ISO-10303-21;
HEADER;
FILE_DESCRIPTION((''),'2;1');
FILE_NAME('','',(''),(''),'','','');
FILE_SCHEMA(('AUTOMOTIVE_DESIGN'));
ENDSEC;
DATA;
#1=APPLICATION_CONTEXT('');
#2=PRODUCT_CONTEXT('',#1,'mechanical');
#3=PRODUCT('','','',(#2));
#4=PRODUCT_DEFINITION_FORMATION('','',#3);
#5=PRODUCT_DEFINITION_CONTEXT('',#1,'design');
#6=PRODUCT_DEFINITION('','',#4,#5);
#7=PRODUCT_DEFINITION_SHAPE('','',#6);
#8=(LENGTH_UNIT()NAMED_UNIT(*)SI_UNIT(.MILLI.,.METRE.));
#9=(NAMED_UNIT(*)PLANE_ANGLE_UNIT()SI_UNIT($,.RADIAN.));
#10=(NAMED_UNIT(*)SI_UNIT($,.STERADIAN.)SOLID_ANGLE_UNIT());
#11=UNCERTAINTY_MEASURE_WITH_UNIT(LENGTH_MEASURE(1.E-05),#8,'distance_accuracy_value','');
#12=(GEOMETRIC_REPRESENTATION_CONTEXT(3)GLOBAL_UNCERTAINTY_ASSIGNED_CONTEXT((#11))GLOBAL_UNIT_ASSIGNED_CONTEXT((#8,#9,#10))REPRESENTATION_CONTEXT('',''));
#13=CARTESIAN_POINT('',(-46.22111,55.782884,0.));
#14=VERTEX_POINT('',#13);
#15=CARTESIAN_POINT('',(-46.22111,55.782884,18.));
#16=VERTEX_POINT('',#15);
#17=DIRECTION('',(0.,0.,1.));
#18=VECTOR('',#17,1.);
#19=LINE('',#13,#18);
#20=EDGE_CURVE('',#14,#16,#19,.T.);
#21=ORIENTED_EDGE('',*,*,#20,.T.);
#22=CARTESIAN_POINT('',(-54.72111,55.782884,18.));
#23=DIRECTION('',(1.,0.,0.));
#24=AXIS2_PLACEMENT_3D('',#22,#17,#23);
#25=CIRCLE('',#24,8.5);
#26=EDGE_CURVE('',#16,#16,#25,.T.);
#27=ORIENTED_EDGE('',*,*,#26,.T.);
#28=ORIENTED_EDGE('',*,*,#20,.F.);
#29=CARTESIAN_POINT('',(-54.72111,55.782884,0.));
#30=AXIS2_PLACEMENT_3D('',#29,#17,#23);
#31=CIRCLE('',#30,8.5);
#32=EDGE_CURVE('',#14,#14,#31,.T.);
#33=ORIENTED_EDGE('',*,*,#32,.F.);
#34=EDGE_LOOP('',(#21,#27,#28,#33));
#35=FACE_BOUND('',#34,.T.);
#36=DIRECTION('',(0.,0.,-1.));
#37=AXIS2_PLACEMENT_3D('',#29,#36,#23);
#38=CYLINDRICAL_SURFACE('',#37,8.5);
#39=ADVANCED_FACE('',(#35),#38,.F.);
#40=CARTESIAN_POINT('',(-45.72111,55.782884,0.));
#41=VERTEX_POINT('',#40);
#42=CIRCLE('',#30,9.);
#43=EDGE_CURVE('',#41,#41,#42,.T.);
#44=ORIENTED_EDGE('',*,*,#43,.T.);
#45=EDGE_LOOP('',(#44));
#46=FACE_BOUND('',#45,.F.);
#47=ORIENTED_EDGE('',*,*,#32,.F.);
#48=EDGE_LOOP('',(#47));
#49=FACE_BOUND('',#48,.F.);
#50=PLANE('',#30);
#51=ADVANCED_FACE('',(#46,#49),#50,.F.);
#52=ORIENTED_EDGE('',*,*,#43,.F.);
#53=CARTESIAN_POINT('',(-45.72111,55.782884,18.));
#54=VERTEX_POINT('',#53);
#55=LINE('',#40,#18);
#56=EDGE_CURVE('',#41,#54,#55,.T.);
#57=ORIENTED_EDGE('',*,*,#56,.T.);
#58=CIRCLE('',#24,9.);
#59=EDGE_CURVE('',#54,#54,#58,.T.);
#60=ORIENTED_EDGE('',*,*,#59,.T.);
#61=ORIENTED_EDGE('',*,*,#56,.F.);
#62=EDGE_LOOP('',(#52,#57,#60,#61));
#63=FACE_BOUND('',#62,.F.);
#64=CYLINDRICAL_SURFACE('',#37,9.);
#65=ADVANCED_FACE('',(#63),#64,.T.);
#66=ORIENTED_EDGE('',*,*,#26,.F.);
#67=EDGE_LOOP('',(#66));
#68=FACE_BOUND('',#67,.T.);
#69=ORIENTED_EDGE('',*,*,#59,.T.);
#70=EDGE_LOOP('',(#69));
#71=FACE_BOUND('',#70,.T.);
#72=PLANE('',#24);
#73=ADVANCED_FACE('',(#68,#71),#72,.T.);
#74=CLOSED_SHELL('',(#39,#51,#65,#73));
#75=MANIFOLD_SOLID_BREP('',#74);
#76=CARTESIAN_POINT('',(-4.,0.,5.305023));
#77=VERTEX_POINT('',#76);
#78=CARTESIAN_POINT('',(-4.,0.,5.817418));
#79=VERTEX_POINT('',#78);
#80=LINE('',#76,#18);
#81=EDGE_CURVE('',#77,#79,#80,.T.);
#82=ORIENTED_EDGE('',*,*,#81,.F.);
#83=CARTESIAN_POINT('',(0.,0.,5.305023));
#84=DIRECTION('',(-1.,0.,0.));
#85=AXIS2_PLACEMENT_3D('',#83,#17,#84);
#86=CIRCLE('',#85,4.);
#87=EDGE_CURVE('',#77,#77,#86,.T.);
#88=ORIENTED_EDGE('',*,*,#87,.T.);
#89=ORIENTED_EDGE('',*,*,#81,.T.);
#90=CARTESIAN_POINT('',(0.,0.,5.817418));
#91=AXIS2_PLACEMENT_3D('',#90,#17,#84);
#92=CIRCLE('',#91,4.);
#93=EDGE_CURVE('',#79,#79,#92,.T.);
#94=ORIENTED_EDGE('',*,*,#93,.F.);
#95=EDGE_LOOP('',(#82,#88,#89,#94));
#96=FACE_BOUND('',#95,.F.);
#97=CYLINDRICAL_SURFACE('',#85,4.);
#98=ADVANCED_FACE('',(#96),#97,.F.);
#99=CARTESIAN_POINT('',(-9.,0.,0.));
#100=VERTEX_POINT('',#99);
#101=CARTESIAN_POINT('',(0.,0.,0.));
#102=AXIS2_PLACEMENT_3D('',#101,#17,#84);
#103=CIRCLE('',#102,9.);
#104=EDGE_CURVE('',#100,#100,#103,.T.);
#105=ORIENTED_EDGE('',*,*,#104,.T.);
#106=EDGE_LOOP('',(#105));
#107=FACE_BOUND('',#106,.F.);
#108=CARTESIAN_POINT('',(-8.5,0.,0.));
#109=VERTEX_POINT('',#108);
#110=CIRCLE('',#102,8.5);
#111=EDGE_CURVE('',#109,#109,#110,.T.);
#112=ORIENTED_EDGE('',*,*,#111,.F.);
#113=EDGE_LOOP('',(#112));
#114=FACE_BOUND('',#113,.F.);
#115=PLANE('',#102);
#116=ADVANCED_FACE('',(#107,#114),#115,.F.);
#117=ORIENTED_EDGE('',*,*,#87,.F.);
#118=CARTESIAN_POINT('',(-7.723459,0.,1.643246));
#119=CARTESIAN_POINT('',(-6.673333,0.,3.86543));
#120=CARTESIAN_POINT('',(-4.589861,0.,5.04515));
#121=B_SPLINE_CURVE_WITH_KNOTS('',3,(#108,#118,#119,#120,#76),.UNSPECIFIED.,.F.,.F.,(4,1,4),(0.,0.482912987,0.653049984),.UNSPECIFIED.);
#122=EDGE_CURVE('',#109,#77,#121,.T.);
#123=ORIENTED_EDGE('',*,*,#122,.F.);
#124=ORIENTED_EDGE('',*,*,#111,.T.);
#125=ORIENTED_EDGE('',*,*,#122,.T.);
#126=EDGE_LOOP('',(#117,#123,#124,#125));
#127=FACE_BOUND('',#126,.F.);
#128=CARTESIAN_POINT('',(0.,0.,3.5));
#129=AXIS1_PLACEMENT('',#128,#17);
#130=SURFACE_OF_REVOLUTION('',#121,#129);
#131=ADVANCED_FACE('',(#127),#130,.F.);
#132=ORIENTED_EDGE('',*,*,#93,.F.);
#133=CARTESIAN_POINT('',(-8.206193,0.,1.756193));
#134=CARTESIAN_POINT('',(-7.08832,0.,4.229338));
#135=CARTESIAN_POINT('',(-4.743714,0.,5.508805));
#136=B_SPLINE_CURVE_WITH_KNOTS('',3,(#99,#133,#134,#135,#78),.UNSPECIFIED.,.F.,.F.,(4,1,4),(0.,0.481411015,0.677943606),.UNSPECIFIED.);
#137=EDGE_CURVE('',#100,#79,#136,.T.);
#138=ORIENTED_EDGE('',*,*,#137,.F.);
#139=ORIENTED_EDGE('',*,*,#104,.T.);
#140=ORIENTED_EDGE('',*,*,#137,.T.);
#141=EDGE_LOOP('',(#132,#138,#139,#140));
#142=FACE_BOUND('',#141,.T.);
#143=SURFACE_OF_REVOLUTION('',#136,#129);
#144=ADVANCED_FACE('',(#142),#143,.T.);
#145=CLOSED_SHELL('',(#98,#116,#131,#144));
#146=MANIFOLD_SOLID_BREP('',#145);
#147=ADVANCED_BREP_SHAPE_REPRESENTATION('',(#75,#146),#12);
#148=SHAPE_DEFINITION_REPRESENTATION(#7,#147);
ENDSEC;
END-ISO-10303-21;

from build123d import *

# Parameters (mm, degrees)
F0_R     = 9
F0_R_2   = 8.5
F1_DEPTH = 18


with BuildPart() as f1:
    # F0 (on Top) → F1 (new body)
    with BuildSketch(Plane.XY):
        with Locations((-54.7211095691, 55.7828843594)):
            Circle(F0_R)
        with Locations((-54.7211095691, 55.7828843594)):
            Circle(F0_R_2, mode=Mode.SUBTRACT)
    extrude(amount=F1_DEPTH)


with BuildPart() as f3:
    # F2 (on Front) → F3 (revolve)
    with BuildSketch(Plane.XZ):
        with BuildLine():
            add(Edge.make_bspline(
                [(-9, 0), (-8.2061928864, 1.756192534), (-7.0883196397, 4.2293381157), (-4.7437136695, 5.5088051811), (-4, 5.8174179779)],
                knots=[0, 0, 0, 0, 0.4814110146, 0.6779436063, 0.6779436063, 0.6779436063, 0.6779436063], degree=3))
            Line((-9, 0), (-8.5, 0))
            add(Edge.make_bspline(
                [(-8.5, 0), (-7.7234594348, 1.643246113), (-6.6733334202, 3.8654302064), (-4.5898606377, 5.0451498847), (-4, 5.30502297)],
                knots=[0, 0, 0, 0, 0.4829129871, 0.6530499844, 0.6530499844, 0.6530499844, 0.6530499844], degree=3))
            Line((-4, 5.30502297), (-4, 5.3174179779))
            Line((-4, 5.3174179779), (-4, 5.8174179779))
        make_face()
    revolve(axis=Axis((0, 0, 3.5), (0, 0, 1)))


solid = Compound([f1.part, f3.part])
